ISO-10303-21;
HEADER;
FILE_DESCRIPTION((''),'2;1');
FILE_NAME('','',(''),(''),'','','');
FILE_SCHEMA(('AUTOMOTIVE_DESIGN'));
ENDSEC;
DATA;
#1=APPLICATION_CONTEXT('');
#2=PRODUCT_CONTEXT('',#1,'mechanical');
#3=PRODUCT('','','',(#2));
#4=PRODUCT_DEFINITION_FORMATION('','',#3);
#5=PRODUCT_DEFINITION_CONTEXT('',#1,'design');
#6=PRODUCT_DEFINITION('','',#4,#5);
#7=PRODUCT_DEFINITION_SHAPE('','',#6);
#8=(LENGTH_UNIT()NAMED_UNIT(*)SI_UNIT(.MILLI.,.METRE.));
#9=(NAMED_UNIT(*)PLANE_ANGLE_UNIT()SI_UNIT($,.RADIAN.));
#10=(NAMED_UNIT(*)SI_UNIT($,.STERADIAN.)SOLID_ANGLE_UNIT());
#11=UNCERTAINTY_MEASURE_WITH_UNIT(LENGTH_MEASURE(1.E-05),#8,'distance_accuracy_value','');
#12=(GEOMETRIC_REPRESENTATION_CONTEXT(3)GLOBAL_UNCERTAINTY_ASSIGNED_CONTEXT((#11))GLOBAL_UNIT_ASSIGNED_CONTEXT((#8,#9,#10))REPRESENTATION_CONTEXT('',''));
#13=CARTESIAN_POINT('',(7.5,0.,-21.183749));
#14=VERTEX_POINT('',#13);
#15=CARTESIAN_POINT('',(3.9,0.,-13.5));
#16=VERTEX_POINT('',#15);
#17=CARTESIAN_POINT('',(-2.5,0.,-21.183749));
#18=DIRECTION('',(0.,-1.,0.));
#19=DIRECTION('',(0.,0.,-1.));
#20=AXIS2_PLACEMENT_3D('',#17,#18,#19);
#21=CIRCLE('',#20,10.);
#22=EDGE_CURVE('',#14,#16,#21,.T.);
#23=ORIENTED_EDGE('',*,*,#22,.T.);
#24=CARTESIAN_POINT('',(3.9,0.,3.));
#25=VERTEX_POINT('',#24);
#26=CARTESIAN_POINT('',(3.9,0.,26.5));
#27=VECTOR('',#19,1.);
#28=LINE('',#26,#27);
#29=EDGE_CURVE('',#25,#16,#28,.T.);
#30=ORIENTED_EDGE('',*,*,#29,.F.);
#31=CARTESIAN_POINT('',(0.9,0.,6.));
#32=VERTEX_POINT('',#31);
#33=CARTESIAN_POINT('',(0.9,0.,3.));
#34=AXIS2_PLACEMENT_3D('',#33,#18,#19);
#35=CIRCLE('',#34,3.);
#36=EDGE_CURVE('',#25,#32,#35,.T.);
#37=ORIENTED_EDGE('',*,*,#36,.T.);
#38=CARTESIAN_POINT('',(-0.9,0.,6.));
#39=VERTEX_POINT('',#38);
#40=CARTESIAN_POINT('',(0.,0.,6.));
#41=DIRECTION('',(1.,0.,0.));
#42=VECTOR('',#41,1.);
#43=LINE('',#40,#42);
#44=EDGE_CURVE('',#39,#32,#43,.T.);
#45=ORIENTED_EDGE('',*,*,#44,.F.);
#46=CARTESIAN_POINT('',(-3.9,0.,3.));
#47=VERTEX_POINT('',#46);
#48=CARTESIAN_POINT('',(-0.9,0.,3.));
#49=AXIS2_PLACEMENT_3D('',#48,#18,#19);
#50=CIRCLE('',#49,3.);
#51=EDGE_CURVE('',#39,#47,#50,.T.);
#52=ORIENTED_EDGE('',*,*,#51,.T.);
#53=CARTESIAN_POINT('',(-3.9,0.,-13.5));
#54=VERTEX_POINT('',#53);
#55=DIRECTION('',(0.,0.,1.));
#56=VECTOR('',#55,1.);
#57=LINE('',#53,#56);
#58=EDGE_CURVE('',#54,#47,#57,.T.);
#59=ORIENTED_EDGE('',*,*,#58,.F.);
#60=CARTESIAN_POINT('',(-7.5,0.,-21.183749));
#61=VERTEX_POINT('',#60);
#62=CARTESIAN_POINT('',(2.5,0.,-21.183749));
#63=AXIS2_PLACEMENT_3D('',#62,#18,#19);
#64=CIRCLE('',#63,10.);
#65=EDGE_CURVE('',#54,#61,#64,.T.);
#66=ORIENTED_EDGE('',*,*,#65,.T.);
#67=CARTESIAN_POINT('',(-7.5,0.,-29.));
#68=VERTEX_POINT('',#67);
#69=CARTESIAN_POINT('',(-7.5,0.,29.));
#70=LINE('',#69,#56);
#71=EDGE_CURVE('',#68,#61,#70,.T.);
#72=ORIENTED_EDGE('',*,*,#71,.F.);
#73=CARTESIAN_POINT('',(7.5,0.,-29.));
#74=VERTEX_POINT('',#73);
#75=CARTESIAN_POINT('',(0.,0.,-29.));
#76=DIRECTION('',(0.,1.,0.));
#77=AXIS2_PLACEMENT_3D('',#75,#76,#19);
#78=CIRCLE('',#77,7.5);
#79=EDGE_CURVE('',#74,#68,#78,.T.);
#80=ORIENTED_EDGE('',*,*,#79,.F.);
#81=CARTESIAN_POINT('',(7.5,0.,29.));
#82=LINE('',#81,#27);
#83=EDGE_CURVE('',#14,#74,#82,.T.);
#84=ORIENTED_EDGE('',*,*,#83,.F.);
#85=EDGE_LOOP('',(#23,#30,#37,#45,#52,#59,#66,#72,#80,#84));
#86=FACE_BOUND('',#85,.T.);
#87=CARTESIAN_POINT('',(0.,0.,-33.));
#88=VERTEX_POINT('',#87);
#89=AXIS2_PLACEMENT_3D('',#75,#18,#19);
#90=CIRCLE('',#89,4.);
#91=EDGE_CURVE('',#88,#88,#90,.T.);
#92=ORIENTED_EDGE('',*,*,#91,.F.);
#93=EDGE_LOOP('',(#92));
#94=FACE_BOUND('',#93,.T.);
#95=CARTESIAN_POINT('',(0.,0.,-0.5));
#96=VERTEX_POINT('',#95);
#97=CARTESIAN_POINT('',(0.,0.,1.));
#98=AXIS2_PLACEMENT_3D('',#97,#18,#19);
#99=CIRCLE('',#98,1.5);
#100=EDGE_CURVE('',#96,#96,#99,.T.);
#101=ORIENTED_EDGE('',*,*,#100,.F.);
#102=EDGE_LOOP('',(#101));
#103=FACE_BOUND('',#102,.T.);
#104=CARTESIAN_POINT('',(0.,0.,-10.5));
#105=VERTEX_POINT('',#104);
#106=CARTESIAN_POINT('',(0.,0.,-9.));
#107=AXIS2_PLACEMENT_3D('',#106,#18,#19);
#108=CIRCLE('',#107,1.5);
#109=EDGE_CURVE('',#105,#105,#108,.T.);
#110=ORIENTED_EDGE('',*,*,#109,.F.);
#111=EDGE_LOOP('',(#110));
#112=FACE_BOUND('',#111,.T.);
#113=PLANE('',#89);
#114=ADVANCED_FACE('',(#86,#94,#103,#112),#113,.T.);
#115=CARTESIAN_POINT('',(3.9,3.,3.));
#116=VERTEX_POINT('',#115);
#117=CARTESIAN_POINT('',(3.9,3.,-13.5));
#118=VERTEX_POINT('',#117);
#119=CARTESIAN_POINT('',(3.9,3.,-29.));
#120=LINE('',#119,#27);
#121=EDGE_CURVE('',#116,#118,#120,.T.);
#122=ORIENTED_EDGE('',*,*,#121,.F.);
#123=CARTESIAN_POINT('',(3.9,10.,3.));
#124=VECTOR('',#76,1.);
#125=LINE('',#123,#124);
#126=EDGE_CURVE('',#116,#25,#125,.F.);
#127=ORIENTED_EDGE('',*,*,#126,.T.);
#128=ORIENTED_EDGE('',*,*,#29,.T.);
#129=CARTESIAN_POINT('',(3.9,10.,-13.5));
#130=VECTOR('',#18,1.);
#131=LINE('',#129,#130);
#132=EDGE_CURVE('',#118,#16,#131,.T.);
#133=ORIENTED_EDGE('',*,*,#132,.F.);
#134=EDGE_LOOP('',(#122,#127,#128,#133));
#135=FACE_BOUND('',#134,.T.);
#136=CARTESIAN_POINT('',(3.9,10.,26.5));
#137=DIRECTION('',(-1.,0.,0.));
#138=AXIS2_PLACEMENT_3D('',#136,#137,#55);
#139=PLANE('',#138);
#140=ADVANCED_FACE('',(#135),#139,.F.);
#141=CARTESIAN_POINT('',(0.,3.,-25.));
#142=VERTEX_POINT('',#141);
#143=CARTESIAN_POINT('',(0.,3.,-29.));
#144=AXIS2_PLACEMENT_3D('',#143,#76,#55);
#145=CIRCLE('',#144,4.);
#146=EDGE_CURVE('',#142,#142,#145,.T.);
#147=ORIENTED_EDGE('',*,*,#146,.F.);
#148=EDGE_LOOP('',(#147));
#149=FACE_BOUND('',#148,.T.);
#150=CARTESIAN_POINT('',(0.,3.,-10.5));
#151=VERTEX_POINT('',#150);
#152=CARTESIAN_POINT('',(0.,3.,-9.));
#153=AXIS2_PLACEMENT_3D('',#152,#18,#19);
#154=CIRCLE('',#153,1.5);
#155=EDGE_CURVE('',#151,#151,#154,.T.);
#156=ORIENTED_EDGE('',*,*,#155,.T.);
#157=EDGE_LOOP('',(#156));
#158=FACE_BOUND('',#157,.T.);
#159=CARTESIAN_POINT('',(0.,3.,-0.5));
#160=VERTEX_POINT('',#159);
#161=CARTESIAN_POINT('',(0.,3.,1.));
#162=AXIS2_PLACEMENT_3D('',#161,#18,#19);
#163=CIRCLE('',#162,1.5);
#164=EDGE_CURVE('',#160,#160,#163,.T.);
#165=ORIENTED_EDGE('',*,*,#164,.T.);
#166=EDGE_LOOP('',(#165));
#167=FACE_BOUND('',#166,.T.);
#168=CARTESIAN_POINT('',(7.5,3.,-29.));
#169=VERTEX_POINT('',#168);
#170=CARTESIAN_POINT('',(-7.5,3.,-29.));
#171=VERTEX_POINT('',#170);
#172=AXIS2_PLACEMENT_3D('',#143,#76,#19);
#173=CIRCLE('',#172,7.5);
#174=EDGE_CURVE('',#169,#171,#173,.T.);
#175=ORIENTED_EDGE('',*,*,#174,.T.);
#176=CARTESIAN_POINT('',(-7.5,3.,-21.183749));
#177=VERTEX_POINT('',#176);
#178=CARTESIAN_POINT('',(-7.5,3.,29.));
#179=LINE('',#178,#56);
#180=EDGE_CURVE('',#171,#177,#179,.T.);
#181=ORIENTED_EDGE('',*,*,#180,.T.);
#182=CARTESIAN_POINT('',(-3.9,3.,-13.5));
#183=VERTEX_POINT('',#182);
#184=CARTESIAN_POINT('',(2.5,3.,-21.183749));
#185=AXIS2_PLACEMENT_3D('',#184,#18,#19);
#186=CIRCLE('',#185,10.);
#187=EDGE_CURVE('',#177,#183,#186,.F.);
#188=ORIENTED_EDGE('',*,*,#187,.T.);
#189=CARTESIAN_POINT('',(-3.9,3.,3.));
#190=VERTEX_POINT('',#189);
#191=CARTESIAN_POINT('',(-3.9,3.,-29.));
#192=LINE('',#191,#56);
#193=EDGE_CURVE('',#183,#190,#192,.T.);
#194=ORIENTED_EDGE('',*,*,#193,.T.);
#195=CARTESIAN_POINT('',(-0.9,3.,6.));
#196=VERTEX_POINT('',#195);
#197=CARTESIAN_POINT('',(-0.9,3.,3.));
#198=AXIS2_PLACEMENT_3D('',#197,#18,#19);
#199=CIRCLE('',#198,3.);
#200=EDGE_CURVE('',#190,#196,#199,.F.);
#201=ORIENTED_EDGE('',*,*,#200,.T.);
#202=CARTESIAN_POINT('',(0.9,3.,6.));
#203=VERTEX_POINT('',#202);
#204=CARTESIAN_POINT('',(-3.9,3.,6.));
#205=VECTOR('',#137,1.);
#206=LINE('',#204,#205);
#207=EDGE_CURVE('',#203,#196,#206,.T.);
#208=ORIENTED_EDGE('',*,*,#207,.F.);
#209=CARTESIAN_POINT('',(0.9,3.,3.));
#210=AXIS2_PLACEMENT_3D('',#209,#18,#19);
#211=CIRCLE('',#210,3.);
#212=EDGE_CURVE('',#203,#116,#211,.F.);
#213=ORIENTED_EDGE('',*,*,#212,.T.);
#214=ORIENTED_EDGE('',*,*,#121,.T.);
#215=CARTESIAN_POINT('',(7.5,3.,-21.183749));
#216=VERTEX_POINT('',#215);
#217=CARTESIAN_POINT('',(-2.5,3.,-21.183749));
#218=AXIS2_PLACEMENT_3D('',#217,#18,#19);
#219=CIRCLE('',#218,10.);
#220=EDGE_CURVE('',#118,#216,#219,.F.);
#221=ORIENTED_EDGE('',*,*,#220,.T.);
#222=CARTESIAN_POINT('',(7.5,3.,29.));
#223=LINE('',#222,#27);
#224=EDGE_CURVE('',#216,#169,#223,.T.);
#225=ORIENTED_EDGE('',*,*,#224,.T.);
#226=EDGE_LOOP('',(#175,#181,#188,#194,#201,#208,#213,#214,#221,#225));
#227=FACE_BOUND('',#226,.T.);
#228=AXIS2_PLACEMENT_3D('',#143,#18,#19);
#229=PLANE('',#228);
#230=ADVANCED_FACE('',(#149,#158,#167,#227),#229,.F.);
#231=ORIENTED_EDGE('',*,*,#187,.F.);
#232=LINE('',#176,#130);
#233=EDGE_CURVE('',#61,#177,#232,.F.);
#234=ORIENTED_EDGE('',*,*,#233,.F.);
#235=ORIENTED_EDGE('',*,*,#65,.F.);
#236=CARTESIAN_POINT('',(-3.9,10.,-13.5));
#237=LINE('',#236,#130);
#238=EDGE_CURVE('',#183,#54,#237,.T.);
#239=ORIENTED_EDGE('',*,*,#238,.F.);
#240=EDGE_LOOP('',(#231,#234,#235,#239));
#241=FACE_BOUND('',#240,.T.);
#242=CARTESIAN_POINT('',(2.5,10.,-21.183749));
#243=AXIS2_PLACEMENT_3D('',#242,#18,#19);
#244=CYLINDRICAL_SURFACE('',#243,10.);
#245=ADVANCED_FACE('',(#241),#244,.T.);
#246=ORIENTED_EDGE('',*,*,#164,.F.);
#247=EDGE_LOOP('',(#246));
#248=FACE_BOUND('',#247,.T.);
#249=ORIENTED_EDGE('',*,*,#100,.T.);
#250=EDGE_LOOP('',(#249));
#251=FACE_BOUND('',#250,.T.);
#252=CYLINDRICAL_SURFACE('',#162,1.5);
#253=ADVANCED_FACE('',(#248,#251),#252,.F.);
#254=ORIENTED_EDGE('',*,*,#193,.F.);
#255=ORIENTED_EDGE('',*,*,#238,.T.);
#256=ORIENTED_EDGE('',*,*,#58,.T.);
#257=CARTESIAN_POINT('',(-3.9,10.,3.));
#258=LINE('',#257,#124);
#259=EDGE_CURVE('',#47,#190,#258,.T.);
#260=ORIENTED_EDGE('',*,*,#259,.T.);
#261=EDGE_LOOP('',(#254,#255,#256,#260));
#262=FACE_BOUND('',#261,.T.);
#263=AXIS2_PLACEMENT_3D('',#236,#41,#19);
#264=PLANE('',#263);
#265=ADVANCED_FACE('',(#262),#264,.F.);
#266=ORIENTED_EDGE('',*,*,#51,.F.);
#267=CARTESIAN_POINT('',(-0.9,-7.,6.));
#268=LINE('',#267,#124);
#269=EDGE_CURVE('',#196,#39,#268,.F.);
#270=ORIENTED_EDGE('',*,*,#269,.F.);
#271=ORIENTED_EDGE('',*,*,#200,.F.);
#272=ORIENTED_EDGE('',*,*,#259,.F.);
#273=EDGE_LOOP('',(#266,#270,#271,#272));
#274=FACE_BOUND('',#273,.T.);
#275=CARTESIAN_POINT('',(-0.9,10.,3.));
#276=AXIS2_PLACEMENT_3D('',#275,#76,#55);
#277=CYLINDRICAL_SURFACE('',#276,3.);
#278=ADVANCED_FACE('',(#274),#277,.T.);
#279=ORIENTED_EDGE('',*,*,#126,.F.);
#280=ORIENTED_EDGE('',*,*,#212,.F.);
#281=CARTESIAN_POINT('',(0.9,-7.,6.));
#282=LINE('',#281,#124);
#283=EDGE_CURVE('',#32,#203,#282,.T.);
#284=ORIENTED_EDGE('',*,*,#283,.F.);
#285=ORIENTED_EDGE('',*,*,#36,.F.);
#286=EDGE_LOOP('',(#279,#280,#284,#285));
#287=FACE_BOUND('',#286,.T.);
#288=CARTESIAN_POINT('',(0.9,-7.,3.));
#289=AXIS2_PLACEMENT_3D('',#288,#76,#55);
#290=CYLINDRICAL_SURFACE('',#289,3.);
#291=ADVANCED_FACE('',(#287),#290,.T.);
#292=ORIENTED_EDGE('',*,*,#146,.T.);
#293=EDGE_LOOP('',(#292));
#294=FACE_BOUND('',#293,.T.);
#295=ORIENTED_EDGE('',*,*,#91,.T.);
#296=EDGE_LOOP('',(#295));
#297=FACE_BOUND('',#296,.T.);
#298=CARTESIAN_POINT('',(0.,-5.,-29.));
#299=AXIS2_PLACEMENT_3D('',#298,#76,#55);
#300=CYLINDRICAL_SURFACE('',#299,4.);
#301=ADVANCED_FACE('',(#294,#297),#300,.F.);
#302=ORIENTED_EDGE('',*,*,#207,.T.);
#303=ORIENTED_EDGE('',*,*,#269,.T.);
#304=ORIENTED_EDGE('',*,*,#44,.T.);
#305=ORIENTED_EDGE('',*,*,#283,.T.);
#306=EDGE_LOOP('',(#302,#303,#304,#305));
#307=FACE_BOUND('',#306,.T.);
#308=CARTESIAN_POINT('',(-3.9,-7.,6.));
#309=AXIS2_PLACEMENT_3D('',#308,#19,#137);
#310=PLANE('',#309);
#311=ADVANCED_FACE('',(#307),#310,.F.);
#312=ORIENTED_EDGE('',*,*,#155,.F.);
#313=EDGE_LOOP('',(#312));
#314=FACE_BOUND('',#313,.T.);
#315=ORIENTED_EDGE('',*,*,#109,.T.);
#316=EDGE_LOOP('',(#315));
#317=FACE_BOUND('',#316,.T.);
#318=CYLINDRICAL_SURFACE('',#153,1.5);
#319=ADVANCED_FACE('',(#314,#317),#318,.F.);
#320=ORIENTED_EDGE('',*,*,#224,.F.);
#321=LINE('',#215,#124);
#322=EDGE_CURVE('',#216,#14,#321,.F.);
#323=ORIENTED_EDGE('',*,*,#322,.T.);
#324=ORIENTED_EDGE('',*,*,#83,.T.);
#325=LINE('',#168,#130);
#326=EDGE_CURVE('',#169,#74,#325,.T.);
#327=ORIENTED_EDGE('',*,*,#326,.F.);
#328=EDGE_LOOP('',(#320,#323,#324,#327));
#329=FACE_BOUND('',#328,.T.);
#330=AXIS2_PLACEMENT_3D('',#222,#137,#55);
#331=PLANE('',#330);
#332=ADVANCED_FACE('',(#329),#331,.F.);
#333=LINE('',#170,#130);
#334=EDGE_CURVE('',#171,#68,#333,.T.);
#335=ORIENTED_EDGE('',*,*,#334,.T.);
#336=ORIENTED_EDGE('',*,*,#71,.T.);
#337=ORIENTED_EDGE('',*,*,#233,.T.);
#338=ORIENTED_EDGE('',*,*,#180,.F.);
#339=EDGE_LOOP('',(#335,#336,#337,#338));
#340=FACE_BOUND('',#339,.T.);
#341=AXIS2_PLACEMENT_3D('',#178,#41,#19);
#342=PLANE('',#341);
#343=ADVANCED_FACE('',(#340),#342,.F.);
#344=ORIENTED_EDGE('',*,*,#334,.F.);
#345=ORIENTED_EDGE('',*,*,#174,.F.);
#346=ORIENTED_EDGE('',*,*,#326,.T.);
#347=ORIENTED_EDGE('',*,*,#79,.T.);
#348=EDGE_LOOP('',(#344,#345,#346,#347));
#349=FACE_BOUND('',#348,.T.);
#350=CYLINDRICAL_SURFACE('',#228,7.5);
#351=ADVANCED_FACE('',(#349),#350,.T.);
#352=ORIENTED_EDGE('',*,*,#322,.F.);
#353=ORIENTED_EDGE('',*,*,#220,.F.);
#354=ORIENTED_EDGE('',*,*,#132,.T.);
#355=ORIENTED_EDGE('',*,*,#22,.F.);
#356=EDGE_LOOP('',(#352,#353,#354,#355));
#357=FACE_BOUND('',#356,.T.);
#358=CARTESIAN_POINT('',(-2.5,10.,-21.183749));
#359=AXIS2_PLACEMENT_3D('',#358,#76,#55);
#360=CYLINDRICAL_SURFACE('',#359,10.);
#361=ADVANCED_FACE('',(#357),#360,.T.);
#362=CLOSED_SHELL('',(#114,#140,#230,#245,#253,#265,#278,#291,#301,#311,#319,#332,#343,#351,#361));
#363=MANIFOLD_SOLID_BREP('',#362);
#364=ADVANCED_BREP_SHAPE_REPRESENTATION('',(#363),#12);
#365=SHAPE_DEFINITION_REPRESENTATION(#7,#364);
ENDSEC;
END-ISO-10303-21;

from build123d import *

# Parameters (mm, degrees)
EXTRUDE_1_DEPTH     = 3
SKETCH_2_R          = 4
CUT_EXTRUDE_1_DEPTH = 8
SKETCH_3_R          = 1.5
CUT_EXTRUDE_2_DEPTH = 3
CUT_EXTRUDE_3_DEPTH = 10
FILLET_1_R          = 10
SKETCH_5_W          = 7.8
SKETCH_5_H          = 20.5
CUT_EXTRUDE_4_DEPTH = 10
FILLET_3_R          = 3


with BuildPart() as part:
    # 草图1 → 凸台-拉伸1 (new body)
    with BuildSketch(Plane(origin=(0, 0, 0), x_dir=(1, 0, 0), z_dir=(0, 1, 0))):
        with BuildLine():
            Line((-7.5, -29), (7.5, -29))
            Line((7.5, -29), (7.5, 29))
            ThreePointArc((7.5, 29), (0, 36.5), (-7.5, 29))
            Line((-7.5, 29), (-7.5, -29))
        make_face()
    extrude(amount=EXTRUDE_1_DEPTH)

    # 草图2 → 切除-拉伸1 (cut)
    with BuildSketch(Plane(origin=(0, 3, 0), x_dir=(1, 0, 0), z_dir=(0, 1, 0))):
        with Locations(Location((0, 29, 0), (0, 0, 270))):
            Circle(SKETCH_2_R)
    extrude(amount=-CUT_EXTRUDE_1_DEPTH, mode=Mode.SUBTRACT)

    # 草图3 → 切除-拉伸2 (cut)
    with BuildSketch(Plane.XZ):
        with Locations(Location((0, 1, 0), (0, 0, 270))):
            Circle(SKETCH_3_R)
        with Locations(Location((0, -9, 0), (0, 0, 270))):
            Circle(SKETCH_3_R)
    extrude(amount=-CUT_EXTRUDE_2_DEPTH, mode=Mode.SUBTRACT)

    # 草图4 → 切除-拉伸3 (cut)
    with BuildSketch(Plane.XZ):
        Polygon((-7.5, -13.5), (-3.9, -13.5), (-3.9, 26.5), (3.9, 26.5), (3.9, -13.5), (7.5, -13.5), (7.5, 29), (-7.5, 29), align=None)
    extrude(amount=-CUT_EXTRUDE_3_DEPTH, mode=Mode.SUBTRACT)

    # 圆角1
    # the kernel refuses this fillet: 10 mm, written as the material it takes off along each edge
    with BuildSketch(Plane(origin=(7.5, -19.209372712, -13.5), x_dir=(0, 0, -1), z_dir=(0, 1, 0))) as fillet_1_piece_1:
        with BuildLine():
            CenterArc((7.683749085, 10), FILLET_1_R, 219.7918195, 50.2081805)
            Line((0, 3.6), (-0.153674982, 3.472))
            ThreePointArc((-0.153674982, 3.472), (-0.2, 1.8), (-0.2, 0))
            Line((-0.2, 0), (0, -0.2))
            Line((0, -0.2), (7.683749085, -0.2))
            Line((7.683749085, -0.2), (7.683749085, 0))
        make_face()
    extrude(amount=41.418745425, mode=Mode.SUBTRACT)
    with BuildSketch(Plane(origin=(-7.5, -19.209372712, -13.5), x_dir=(0, 0, -1), z_dir=(0, 1, 0))) as fillet_1_piece_2:
        with BuildLine():
            CenterArc((7.683749085, -10), FILLET_1_R, 90, 50.2081805)
            Line((0, -3.6), (-0.153674982, -3.472))
            ThreePointArc((-0.153674982, -3.472), (-0.2, -1.8), (-0.2, 0))
            Line((-0.2, 0), (0, 0.2))
            Line((0, 0.2), (7.683749085, 0.2))
            Line((7.683749085, 0.2), (7.683749085, 0))
        make_face()
    extrude(amount=41.418745425, mode=Mode.SUBTRACT)

    # 草图5 → 切除-拉伸4 (cut)
    with BuildSketch(Plane(origin=(0, 3, 0), x_dir=(1, 0, 0), z_dir=(0, 1, 0))):
        with Locations((0, -16.25)):
            Rectangle(SKETCH_5_W, SKETCH_5_H)
    extrude(amount=-CUT_EXTRUDE_4_DEPTH, mode=Mode.SUBTRACT)

    # 圆角3
    fillet_3_edges = [part.edges().sort_by_distance(p)[0] for p in [
        (-3.9, 1.5, 6),
        (3.9, 1.5, 6),
    ]]
    fillet(fillet_3_edges, radius=FILLET_3_R)


solid = part.part
